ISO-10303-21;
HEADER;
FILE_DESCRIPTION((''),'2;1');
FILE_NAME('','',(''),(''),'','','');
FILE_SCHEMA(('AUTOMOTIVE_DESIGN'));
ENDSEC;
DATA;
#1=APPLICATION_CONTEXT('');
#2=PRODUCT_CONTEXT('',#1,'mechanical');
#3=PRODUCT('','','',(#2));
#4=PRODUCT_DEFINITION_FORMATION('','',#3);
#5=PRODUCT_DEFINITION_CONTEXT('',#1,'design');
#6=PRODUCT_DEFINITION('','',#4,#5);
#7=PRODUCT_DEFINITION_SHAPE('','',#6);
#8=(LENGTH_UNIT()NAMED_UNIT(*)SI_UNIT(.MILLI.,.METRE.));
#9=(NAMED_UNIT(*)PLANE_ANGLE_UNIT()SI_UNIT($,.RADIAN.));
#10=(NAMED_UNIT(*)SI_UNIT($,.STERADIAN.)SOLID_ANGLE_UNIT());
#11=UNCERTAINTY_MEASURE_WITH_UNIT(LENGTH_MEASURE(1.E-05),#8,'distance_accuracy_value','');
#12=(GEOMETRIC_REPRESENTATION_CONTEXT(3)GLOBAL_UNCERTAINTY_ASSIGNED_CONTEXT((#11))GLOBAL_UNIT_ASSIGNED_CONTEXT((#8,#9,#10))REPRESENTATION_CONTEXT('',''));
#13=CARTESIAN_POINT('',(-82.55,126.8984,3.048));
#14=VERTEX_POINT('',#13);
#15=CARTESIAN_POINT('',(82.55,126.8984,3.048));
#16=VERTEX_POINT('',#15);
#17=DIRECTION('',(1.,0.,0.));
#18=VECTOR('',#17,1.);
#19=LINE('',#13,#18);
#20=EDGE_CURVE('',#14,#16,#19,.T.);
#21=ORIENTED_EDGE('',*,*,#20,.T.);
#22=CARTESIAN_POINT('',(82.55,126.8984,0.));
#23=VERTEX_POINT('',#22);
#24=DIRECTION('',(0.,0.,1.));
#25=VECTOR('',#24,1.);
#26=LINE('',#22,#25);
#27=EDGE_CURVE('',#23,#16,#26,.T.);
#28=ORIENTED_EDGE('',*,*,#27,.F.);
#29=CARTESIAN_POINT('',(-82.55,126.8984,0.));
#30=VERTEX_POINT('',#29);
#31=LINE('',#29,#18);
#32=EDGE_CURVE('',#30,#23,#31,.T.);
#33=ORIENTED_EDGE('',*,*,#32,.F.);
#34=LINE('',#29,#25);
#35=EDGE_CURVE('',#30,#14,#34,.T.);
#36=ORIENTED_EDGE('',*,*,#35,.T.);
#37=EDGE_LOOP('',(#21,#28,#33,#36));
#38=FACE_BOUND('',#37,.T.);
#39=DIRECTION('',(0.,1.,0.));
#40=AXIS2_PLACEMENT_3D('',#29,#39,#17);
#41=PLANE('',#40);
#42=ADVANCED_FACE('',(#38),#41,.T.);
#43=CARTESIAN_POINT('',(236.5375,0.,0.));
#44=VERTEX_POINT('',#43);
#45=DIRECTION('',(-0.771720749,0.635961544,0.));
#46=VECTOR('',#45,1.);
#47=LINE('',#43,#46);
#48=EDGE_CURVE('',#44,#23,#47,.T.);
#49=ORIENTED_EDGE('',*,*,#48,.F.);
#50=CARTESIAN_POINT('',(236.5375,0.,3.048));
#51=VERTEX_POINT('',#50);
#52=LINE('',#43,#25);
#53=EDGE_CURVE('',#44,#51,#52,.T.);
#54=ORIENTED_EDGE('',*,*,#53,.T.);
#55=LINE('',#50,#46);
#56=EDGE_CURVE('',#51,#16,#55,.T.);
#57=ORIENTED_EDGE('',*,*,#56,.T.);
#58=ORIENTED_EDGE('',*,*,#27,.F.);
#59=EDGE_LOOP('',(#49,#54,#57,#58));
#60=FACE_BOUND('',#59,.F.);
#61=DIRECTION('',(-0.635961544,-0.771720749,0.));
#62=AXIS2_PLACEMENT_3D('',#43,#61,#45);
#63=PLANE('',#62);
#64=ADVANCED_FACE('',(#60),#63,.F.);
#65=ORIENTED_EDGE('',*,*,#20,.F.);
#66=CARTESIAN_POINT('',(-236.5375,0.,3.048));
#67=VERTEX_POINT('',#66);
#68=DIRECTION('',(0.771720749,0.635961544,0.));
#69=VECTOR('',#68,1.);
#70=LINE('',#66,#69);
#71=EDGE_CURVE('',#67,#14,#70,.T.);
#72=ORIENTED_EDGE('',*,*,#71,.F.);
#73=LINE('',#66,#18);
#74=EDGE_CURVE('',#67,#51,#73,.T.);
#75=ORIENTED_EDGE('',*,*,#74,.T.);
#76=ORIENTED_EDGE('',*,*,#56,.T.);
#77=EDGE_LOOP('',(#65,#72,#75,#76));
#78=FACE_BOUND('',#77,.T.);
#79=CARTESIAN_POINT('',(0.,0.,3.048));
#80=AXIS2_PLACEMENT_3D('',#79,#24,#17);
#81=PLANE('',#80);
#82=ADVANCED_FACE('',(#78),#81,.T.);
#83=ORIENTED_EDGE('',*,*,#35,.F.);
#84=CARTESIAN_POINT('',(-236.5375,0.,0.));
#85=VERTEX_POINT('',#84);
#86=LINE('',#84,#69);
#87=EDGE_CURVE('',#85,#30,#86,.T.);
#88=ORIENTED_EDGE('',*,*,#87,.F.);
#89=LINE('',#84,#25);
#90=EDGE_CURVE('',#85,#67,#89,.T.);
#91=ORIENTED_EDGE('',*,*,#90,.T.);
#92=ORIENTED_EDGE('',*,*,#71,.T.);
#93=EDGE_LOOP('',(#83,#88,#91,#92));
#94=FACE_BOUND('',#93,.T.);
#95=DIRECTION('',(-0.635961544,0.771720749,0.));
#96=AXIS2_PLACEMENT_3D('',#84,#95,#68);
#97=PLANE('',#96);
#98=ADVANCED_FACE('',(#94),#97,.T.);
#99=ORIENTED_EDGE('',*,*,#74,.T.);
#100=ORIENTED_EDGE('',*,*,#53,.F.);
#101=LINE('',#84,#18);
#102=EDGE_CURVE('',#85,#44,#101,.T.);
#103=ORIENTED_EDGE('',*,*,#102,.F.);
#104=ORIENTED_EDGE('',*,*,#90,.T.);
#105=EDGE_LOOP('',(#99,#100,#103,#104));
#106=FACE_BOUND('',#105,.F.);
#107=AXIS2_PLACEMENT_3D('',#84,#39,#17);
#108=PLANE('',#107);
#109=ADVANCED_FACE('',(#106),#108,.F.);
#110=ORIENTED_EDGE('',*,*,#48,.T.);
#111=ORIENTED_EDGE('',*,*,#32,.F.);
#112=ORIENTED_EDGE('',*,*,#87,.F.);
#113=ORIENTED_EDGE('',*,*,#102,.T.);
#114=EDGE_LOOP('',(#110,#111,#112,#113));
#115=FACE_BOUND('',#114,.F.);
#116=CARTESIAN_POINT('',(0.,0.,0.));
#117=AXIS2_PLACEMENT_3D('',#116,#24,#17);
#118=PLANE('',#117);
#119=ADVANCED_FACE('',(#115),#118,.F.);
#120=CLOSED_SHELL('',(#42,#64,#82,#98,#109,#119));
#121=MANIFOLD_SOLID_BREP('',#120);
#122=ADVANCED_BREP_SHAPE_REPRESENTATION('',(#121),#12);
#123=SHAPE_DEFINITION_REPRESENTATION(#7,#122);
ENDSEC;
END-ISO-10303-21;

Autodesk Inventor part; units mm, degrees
ref_plane "YZ Plane" through (0, 0, 0) normal (1, 0, 0) x (0, 1, 0)
ref_plane "XZ Plane" through (0, 0, 0) normal (0, 1, 0) x (-1, 0, 0)
ref_plane "XY Plane" through (0, 0, 0) normal (0, 0, 1) x (1, 0, 0)
sketch "Sketch1" plane through (0, 0, 0) normal (0, 0, 1) x (1, 0, 0)
  line L0 (-236.5375, 0) -> (236.5375, 0)
  line L1 (-82.55, 126.8984) -> (82.55, 126.8984)
  line L2 (-236.5375, 0) -> (-82.55, 126.8984)
  line L3 (236.5375, 0) -> (82.55, 126.8984)
  point P0 (0, 0)
  point P1 (0, 0)
  point P2 (0, 126.8984)
  dimension "d0" = 473.075
  dimension "d1" = 165.1
  dimension "d2" = 126.8984
extrude "Plate1" add sketch "Sketch1" along normal blind 3.048
equation "\"BendRadius\" = Thickness"
equation "\"BendReliefWidth\" = Thickness"
equation "\"BendReliefDepth\" = 0.5 * Thickness"
equation "\"CornerReliefSize\" = 4 * Thickness"
equation "\"MinimumRemnant\" = 2 * Thickness"
equation "\"TransitionRadius\" = BendRadius"
equation "\"JacobiRadiusSize\" = BendRadius"
equation "\"GapSize\" = Thickness"
equation "\"d3\" = BendRadius"
equation "\"Thickness\" = 3.048"
properties part number "Cover_Back"
